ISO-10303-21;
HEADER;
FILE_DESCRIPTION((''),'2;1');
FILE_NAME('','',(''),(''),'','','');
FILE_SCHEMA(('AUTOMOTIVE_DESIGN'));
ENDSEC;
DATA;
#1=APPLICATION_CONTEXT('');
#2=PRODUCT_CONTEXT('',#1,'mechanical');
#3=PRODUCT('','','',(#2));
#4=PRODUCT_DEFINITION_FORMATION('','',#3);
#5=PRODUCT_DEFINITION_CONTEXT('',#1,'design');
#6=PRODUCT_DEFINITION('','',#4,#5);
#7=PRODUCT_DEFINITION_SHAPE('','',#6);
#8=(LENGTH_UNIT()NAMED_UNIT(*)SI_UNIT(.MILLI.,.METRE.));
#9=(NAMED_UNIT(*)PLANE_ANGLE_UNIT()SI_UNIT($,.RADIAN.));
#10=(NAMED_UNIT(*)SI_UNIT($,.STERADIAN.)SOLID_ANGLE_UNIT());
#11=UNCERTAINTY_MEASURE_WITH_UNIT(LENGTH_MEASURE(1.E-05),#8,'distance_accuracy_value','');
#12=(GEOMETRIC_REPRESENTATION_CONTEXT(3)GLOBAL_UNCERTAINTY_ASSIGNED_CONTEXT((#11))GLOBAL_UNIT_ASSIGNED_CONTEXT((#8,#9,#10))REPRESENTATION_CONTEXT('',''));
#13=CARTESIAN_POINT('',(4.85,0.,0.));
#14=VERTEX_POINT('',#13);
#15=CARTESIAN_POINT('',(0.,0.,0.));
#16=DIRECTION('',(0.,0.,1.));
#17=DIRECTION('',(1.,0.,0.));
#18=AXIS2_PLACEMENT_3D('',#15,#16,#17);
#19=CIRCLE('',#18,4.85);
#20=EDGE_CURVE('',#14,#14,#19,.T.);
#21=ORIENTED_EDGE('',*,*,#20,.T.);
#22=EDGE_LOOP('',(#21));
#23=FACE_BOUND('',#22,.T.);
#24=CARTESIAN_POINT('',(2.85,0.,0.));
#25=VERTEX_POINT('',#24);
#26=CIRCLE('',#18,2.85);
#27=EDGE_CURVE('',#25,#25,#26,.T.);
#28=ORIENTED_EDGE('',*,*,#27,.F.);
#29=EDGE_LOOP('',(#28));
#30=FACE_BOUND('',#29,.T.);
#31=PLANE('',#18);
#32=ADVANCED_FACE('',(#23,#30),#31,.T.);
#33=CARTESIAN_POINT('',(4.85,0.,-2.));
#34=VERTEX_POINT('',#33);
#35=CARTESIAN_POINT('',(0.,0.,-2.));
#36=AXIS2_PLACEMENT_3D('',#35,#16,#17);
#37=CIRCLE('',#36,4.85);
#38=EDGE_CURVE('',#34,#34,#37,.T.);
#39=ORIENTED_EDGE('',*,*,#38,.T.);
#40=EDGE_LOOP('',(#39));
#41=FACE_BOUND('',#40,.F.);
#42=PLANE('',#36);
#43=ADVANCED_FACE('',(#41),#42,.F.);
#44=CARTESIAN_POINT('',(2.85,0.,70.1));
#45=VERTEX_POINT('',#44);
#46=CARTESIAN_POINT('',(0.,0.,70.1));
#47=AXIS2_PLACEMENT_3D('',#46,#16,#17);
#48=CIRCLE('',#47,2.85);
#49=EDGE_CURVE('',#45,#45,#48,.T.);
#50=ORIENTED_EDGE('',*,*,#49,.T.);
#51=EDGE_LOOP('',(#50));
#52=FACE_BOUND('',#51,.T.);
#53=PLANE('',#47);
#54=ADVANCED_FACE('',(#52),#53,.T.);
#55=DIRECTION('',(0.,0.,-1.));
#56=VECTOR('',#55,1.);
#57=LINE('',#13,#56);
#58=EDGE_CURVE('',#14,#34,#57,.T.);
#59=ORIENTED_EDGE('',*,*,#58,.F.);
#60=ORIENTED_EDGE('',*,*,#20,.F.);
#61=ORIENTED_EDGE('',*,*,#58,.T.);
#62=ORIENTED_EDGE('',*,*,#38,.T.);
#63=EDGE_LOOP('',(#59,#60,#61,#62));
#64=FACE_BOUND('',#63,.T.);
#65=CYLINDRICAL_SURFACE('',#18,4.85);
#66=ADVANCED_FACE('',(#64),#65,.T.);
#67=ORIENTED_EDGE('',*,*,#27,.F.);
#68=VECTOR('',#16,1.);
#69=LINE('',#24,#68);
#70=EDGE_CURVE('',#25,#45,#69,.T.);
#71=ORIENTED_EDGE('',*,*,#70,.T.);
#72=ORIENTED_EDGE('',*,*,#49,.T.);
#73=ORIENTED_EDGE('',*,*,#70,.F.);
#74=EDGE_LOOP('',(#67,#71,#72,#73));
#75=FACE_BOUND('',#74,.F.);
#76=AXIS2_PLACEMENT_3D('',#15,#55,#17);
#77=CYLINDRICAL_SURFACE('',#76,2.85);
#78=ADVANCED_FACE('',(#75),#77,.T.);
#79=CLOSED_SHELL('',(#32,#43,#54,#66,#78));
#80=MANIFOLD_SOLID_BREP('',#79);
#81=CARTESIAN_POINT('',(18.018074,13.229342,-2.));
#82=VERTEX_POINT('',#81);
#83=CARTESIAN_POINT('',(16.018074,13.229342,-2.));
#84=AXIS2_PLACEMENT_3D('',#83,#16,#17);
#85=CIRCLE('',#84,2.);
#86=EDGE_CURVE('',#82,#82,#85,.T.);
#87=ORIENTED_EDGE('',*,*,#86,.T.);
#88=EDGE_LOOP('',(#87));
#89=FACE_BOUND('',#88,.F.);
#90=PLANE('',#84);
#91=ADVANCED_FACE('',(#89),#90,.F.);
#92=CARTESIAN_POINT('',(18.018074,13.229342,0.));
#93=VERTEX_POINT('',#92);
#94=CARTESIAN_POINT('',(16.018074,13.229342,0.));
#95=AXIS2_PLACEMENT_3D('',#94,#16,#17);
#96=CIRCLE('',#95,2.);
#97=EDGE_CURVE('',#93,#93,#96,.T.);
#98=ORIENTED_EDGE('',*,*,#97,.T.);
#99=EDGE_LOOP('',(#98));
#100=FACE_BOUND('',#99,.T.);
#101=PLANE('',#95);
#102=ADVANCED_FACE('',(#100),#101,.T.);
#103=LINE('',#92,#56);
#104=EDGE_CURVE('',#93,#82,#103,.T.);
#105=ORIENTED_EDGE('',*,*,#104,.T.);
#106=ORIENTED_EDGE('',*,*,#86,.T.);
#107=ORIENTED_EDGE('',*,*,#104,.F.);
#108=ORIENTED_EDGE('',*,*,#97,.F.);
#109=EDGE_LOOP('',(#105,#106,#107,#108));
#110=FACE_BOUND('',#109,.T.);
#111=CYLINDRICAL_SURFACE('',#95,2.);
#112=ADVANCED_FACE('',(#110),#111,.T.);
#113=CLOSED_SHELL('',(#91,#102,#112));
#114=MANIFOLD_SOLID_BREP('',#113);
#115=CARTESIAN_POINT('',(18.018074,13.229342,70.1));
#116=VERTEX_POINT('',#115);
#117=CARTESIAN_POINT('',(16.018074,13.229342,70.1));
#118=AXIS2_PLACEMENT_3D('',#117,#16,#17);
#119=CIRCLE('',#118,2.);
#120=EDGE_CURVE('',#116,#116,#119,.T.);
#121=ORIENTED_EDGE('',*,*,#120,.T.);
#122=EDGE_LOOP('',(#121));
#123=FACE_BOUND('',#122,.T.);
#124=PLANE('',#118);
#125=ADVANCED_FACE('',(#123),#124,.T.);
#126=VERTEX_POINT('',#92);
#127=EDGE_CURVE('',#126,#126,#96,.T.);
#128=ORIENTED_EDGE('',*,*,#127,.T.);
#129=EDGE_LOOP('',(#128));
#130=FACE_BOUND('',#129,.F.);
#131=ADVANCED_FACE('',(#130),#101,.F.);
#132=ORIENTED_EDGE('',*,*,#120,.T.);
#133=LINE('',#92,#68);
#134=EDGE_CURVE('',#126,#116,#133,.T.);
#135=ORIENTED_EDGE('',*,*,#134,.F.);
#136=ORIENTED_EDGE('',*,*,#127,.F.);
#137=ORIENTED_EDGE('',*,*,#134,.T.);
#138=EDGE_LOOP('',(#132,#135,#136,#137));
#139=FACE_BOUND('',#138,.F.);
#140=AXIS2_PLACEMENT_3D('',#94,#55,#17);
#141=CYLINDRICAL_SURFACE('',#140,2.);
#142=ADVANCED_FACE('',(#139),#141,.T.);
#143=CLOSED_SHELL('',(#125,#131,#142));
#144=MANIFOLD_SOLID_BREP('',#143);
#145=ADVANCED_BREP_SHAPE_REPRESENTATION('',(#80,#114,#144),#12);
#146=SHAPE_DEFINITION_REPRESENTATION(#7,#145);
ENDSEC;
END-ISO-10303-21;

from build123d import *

# Parameters (mm, degrees)
F0_R      = 2.85
F1_DEPTH  = 70.1
F0_R_2    = 2
F0_R_3    = 4.85
F1_FACE_R = 2.85
F2_DEPTH  = 2


with BuildPart() as f1:
    # F0 (on Top) → F1 (new body)
    with BuildSketch(Plane.XY):
        Circle(F0_R)
    extrude(amount=F1_DEPTH)

    # F0 (on Top) + F1_face (on face) → F2 (join)
    with BuildSketch(Plane.XY):
        Circle(F0_R_3)
        Circle(F0_R, mode=Mode.SUBTRACT)
        with Locations((16.0180740058, 13.2293421775)):
            Circle(F0_R_2)
    with BuildSketch(Plane(origin=(0, 0, 0), x_dir=(1, 0, 0), z_dir=(0, 0, -1))):
        Circle(F1_FACE_R)
    extrude(amount=-F2_DEPTH, dir=(0, 0, 1))


with BuildPart() as f1b:
    # F0 (on Top) → F1, piece 2 (new body)
    with BuildSketch(Plane.XY):
        with Locations((16.0180740058, 13.2293421775)):
            Circle(F0_R_2)
    extrude(amount=F1_DEPTH)


solid = Compound([f1.part, f1b.part])
